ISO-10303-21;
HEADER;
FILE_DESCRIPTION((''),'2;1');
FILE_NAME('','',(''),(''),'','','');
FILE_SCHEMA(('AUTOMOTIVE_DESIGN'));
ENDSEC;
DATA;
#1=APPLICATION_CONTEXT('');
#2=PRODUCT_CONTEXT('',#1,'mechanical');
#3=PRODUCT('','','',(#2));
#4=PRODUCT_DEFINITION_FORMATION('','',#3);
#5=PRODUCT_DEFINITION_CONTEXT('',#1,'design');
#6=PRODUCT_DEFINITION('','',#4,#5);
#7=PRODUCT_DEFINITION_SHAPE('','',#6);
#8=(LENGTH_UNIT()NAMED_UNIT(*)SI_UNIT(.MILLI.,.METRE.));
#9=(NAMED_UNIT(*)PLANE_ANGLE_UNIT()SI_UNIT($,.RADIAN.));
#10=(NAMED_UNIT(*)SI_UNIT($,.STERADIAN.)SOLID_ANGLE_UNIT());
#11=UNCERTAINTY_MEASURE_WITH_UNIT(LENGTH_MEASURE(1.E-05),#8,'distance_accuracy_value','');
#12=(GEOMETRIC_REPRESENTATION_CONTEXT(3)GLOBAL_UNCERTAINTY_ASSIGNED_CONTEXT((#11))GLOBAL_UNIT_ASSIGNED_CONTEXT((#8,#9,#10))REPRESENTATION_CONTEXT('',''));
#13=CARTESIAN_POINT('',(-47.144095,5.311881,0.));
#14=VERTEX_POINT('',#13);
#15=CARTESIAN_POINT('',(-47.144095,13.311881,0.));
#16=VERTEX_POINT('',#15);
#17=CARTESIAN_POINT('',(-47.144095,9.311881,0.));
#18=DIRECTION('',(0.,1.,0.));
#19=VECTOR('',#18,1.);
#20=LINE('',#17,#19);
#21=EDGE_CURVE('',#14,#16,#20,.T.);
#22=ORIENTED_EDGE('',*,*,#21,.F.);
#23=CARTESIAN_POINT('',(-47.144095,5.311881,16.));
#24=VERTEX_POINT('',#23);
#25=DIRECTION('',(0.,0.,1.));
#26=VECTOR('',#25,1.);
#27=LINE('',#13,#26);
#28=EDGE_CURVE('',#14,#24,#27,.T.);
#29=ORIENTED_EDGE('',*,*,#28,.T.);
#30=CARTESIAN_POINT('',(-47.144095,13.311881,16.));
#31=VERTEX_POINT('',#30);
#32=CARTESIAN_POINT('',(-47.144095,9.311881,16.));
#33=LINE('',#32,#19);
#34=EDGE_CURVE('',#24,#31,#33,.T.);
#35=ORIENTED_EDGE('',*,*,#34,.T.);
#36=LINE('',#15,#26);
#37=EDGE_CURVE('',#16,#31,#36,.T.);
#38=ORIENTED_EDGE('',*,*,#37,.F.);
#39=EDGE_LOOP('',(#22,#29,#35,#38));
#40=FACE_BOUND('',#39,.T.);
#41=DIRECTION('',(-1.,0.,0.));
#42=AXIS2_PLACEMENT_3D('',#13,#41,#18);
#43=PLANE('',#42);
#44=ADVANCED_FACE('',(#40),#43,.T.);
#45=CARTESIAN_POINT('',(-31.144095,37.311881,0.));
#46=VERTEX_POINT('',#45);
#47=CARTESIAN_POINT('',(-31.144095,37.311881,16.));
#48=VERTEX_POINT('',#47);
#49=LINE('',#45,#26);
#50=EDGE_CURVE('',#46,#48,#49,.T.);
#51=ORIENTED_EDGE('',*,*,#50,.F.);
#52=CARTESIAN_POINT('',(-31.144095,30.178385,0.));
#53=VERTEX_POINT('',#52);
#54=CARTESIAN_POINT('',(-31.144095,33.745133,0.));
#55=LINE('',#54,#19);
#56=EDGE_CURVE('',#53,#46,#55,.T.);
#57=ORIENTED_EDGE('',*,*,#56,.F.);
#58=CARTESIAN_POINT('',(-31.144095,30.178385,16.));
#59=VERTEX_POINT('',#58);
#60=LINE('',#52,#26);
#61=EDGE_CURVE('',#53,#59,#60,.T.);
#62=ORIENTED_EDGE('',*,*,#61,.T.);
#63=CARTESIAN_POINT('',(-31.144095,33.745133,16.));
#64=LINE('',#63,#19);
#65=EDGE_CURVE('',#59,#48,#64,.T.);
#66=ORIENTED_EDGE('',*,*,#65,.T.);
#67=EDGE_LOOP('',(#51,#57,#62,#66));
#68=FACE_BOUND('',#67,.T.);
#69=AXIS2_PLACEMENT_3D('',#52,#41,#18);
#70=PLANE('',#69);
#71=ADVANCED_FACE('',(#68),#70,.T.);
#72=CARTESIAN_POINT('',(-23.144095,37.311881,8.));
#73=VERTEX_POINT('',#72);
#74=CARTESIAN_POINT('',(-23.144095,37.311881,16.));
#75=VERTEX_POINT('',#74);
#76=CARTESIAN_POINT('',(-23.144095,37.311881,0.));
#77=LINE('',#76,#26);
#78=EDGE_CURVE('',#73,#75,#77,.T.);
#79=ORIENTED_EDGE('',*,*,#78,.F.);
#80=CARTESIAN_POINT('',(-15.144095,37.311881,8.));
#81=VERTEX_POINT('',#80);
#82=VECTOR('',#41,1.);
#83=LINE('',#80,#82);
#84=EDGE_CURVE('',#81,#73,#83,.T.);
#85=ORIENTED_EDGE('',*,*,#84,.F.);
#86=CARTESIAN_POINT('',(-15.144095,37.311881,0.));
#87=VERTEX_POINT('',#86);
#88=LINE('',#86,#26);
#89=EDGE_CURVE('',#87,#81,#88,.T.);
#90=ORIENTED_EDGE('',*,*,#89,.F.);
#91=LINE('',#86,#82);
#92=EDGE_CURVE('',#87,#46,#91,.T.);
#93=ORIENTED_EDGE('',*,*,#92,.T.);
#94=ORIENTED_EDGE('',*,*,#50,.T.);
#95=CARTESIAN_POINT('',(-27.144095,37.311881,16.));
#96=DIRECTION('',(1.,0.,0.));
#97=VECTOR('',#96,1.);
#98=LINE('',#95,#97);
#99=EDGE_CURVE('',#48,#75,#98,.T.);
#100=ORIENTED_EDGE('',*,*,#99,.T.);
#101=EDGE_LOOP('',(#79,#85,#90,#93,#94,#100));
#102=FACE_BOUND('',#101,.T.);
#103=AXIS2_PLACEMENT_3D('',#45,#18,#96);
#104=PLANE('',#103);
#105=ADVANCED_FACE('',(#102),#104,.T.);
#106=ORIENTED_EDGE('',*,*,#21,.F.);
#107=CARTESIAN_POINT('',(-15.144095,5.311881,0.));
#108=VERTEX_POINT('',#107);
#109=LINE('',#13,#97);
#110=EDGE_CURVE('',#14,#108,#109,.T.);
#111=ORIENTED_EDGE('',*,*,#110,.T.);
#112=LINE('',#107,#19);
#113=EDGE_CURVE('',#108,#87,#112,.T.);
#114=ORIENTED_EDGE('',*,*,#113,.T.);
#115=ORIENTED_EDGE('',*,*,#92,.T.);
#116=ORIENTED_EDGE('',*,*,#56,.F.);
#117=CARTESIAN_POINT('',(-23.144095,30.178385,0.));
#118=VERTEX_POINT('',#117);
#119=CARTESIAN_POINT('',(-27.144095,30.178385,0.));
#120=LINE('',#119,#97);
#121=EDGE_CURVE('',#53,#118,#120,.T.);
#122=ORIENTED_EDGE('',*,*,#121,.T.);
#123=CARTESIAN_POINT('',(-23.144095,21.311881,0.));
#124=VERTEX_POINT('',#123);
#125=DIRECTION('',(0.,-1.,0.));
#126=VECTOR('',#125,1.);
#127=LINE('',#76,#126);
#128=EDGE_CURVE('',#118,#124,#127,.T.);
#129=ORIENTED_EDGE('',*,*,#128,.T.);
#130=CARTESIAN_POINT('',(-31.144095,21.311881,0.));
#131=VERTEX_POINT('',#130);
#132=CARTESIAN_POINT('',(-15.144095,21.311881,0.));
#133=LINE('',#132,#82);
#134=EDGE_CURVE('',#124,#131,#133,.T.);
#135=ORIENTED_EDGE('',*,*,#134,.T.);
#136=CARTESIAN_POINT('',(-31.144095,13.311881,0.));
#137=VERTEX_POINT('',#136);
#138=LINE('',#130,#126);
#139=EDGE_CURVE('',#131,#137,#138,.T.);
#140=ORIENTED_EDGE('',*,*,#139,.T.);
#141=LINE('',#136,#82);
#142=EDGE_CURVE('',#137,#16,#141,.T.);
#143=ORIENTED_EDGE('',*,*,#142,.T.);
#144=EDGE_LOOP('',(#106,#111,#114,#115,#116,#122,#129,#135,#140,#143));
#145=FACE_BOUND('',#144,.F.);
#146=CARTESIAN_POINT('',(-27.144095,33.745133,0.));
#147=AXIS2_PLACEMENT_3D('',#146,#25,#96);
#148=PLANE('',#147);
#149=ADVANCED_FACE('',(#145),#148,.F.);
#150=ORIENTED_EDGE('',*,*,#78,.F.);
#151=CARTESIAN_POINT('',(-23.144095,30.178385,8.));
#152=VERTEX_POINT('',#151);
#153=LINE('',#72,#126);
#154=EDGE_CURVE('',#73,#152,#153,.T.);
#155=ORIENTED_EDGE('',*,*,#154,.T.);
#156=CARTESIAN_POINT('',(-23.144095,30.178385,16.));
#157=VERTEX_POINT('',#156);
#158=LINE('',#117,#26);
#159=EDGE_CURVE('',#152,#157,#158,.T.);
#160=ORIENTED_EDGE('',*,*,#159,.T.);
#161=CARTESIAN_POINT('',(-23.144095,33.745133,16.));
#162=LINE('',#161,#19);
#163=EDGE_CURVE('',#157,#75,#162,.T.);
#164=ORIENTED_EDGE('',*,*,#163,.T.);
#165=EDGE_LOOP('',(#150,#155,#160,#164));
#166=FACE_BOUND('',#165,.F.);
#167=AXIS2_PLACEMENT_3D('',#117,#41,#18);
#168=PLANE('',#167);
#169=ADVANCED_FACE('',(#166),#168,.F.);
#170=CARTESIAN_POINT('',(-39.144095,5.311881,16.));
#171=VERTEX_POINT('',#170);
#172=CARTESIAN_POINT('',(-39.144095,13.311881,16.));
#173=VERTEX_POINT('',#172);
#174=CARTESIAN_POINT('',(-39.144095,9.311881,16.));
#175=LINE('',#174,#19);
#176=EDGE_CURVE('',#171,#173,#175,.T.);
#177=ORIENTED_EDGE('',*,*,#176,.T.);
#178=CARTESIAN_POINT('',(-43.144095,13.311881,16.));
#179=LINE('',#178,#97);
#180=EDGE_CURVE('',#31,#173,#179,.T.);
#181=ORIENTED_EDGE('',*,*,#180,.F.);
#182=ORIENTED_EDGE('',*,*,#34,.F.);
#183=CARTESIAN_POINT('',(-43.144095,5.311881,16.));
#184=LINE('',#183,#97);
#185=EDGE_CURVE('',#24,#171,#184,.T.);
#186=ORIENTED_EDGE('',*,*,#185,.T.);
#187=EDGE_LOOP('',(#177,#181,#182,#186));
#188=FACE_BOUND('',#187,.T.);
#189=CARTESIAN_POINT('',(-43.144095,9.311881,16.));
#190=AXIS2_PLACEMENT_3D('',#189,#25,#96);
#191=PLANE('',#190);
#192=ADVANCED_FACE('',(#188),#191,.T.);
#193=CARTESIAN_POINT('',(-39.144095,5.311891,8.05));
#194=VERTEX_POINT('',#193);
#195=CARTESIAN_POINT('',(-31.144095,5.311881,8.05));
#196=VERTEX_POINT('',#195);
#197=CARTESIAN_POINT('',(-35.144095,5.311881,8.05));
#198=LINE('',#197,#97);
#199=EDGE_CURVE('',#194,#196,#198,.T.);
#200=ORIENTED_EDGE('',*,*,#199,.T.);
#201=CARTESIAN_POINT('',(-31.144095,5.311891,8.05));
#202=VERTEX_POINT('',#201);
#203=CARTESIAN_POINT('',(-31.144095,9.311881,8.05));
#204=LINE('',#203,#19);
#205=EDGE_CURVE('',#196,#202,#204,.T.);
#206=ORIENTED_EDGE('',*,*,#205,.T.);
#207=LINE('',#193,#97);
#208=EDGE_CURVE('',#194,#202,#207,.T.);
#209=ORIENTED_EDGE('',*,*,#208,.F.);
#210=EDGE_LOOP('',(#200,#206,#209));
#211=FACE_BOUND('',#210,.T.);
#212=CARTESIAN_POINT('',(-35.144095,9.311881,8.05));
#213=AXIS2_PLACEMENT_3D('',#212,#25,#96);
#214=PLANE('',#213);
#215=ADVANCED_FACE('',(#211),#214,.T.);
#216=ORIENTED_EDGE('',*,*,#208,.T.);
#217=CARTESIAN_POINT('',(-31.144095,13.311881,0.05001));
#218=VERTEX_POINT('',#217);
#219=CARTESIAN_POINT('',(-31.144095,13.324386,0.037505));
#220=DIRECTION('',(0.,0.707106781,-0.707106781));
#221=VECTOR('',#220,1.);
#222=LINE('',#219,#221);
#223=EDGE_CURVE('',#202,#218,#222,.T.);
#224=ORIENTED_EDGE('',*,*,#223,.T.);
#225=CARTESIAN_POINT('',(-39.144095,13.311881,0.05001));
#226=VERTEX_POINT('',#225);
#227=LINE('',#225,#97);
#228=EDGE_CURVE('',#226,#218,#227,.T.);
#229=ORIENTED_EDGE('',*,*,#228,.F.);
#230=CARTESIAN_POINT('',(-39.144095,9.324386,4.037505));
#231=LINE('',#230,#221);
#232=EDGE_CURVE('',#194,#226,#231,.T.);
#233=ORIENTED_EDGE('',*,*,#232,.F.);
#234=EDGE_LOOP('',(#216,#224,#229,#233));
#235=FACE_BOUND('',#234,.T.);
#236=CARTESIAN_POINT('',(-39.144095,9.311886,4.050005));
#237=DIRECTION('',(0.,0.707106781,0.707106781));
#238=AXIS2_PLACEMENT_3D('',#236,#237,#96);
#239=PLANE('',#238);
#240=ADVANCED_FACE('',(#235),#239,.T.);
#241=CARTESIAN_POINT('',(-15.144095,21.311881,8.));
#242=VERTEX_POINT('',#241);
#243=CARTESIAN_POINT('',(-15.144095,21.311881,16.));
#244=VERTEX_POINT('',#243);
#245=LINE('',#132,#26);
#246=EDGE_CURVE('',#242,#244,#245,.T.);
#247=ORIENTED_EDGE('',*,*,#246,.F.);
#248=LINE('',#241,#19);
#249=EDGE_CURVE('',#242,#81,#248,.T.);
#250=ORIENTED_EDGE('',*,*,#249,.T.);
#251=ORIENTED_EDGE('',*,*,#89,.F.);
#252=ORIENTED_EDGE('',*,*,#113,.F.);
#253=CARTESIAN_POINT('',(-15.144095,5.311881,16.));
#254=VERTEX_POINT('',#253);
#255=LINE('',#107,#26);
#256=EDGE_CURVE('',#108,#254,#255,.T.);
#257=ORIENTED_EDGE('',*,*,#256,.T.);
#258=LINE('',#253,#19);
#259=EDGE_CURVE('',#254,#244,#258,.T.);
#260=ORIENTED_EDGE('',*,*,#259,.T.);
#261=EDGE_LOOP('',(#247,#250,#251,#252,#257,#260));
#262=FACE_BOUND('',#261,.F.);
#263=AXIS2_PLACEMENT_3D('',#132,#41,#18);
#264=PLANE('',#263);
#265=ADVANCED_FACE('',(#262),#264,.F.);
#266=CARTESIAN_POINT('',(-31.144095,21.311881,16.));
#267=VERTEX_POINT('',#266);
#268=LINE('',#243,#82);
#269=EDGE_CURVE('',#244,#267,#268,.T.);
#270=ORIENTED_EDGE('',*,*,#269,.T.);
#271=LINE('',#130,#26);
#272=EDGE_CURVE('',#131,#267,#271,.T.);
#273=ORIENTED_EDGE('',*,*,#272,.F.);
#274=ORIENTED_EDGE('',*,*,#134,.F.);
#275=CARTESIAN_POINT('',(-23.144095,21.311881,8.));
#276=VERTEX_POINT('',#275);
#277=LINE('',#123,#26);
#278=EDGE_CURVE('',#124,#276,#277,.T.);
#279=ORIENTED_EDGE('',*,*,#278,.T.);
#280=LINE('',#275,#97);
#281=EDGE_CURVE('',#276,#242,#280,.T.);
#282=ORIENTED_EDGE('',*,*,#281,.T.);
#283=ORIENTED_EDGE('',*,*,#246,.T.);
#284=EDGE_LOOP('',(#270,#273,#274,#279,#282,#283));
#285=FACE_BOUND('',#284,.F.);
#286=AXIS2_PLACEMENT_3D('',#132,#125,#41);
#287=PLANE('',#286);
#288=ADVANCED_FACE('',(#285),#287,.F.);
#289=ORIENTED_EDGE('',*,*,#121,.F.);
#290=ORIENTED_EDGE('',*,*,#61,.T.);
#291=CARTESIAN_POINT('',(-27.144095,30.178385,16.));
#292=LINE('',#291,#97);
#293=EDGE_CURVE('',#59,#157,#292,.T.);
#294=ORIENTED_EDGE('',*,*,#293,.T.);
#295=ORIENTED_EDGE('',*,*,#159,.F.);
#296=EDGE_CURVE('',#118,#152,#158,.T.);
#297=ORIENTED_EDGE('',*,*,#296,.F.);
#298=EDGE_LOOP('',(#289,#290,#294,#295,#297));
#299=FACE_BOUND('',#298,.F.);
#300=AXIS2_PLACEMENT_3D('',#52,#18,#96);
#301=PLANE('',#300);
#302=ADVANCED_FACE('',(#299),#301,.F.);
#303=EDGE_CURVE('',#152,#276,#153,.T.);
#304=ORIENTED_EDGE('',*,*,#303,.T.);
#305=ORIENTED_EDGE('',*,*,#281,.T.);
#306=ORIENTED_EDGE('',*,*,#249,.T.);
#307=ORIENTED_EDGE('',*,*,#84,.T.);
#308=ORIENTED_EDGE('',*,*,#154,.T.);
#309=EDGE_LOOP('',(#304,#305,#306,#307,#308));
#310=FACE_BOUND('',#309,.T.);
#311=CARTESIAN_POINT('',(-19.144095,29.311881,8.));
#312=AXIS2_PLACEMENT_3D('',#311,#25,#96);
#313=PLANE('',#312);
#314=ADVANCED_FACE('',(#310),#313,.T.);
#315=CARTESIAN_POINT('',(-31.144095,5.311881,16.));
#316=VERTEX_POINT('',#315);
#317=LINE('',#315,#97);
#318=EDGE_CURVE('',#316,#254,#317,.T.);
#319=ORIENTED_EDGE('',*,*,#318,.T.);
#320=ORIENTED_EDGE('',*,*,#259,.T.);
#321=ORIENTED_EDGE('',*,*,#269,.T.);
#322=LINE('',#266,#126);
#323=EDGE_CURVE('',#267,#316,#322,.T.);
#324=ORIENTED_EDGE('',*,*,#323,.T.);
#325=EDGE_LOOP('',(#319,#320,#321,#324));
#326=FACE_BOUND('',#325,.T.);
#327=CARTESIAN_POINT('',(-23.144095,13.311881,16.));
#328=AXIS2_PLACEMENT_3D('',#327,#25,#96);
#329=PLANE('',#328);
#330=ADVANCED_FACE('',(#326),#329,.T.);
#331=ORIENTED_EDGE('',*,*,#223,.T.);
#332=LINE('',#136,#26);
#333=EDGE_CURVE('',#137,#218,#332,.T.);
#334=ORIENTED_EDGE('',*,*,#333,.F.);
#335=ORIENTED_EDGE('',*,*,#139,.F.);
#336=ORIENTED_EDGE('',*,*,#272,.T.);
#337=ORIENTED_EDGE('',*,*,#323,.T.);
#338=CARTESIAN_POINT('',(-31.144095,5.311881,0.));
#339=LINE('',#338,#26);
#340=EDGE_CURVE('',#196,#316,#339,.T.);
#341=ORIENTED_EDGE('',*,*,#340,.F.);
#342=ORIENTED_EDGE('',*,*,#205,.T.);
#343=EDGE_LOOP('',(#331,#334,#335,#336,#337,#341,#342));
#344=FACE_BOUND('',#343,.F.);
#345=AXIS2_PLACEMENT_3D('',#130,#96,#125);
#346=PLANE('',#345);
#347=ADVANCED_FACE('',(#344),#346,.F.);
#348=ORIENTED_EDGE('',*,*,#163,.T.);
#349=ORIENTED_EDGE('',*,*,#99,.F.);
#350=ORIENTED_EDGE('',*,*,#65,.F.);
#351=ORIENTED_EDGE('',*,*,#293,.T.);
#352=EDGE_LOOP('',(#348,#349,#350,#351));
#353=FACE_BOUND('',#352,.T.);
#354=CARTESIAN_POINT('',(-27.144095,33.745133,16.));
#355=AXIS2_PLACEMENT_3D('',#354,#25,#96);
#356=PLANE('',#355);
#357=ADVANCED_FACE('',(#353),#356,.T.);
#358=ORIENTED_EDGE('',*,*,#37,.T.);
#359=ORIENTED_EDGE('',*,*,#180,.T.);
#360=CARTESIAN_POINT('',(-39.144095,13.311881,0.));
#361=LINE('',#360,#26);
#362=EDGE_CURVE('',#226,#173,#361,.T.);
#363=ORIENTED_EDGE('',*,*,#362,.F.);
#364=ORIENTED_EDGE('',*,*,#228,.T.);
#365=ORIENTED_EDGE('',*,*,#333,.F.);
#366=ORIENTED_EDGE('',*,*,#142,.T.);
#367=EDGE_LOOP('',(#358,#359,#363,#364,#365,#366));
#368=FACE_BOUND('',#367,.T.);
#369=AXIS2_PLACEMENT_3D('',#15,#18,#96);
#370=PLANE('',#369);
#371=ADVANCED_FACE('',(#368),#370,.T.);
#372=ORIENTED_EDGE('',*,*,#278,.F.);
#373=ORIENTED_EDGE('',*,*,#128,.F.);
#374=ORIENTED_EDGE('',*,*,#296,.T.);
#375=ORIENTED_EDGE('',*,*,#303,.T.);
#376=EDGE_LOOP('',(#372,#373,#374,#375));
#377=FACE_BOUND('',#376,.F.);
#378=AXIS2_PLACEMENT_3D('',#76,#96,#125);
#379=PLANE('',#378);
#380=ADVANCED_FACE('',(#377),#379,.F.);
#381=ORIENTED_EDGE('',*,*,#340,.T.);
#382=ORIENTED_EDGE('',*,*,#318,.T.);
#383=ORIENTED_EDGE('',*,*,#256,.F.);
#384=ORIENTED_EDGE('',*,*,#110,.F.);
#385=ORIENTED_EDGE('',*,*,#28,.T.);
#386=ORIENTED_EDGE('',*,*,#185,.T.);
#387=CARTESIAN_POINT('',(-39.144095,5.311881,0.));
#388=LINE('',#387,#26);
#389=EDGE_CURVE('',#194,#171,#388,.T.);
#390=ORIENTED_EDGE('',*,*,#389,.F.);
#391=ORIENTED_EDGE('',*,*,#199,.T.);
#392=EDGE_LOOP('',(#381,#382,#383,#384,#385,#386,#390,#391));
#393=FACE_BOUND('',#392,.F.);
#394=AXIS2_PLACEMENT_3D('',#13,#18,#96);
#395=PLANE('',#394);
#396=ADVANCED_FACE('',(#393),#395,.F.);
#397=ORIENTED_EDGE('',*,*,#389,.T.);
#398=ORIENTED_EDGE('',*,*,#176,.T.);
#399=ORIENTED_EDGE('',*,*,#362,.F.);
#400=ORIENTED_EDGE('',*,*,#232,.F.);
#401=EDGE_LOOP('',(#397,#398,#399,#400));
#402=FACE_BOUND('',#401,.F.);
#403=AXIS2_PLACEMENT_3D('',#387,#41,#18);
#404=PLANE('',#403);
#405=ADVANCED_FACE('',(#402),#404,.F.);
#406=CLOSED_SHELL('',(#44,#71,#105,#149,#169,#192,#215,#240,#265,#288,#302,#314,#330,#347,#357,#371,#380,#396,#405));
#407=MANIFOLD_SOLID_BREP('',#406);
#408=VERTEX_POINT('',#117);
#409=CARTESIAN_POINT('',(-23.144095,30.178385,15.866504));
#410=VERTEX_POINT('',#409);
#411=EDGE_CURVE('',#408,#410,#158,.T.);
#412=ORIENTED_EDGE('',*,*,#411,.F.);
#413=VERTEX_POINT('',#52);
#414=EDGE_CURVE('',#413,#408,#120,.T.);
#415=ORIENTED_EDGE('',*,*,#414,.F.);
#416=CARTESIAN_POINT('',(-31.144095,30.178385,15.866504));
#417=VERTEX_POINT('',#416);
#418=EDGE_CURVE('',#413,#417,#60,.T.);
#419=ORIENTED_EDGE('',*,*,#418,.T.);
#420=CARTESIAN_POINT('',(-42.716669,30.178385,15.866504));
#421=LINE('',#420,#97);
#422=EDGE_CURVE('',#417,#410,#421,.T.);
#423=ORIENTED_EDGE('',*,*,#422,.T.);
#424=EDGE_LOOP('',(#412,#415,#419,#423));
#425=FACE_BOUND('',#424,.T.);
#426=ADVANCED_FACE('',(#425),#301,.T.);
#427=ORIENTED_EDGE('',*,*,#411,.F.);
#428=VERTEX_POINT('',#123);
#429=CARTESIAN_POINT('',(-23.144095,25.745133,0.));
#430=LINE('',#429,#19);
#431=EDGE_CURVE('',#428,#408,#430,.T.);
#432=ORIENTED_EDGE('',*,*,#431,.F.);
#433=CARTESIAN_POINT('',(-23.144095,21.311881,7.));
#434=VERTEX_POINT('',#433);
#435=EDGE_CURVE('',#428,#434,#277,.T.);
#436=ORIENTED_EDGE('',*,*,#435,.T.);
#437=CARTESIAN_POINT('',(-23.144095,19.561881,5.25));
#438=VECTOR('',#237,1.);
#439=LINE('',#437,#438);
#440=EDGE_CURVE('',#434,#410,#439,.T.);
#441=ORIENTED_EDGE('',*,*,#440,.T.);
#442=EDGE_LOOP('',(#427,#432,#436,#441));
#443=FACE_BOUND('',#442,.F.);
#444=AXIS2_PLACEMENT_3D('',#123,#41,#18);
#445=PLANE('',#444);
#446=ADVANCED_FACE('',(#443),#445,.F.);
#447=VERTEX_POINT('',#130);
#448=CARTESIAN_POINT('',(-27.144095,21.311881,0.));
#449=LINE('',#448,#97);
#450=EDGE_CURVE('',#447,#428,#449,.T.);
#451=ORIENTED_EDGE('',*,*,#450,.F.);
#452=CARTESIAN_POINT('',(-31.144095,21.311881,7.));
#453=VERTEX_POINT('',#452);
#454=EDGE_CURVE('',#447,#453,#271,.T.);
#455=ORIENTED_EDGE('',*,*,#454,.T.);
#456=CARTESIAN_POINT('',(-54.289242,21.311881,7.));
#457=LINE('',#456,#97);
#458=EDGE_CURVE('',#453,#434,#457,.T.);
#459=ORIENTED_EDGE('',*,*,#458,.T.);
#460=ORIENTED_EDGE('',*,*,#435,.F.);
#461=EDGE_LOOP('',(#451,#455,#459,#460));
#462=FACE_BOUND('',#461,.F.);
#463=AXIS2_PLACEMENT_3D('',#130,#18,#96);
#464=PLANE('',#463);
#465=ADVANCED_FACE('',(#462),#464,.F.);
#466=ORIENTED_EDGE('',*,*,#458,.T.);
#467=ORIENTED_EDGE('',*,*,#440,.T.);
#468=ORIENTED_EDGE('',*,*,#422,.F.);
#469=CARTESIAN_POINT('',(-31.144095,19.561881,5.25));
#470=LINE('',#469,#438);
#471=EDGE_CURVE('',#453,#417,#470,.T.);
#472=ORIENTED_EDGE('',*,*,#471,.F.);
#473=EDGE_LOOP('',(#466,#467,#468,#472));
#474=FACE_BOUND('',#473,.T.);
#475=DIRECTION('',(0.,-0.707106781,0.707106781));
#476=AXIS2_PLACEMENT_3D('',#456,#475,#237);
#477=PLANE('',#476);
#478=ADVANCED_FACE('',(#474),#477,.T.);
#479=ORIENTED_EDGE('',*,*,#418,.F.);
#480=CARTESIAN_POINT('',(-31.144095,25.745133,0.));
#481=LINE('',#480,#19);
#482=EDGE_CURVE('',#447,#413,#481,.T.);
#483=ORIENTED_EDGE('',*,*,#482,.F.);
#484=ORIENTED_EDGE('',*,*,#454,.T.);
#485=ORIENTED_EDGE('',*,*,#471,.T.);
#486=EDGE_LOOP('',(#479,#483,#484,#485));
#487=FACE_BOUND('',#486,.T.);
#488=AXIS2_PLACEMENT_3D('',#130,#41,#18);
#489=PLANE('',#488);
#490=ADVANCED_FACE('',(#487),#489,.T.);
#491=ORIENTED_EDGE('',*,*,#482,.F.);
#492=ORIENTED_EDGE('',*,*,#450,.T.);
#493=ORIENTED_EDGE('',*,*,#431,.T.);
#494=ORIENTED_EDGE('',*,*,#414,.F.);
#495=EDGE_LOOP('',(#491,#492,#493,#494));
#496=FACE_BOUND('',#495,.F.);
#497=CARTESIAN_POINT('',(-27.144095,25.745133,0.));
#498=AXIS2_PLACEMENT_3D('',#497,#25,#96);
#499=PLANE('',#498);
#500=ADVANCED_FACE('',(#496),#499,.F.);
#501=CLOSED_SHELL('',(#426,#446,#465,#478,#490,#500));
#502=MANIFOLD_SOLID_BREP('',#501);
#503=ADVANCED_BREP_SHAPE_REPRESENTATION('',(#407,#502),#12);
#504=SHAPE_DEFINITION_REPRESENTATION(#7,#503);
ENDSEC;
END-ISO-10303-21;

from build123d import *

# Parameters (mm, degrees)
F0_W        = 8
F0_H        = 8
F1_DEPTH    = 8.05
F2_DEPTH    = 16
F3_SIZE     = 7.99999
F4_DEPTH    = 16
F5_DEPTH    = 8
F0_H_2      = 7.1334964926
F6_DEPTH    = 16
F0_H_3      = 8.8665035074
F7_DEPTH    = 16
F8_T1_DEPTH = 54.2902937834


# Not quite as in the source:
# - a fillet or chamfer that OpenCascade refuses, or shapes differently, is made with other operations: its cross-section is extruded or revolved along the edge and cut away or added
# - a fillet or chamfer is up to 0.001 mm smaller than in the source, because OpenCascade refuses the exact size


with BuildPart() as f1:
    # F0 (on Top) → F1 (new body)
    with BuildSketch(Plane.XY):
        with Locations((-35.1440954627, 9.3118814863)):
            Rectangle(F0_W, F0_H)
    extrude(amount=F1_DEPTH)

    # F0 (on Top) → F2 (join)
    with BuildSketch(Plane.XY):
        Polygon((-23.1440954627, 21.3118814863), (-31.1440954627, 21.3118814863), (-31.1440954627, 13.3118814863), (-31.1440954627, 5.3118814863), (-15.1440954627, 5.3118814863), (-15.1440954627, 21.3118814863), align=None)
    extrude(amount=F2_DEPTH)

    # F3 (size 8 in the source; OpenCascade refuses exactly that, so slightly less here)
    f3_edges = [f1.edges().sort_by_distance(p)[0] for p in [
        (-35.144095, 13.311881, 8.05),
    ]]
    chamfer(f3_edges, length=F3_SIZE)

    # F0 (on Top) → F4 (join)
    with BuildSketch(Plane.XY):
        with Locations((-43.1440954627, 9.3118814863)):
            Rectangle(F0_W, F0_H)
    extrude(amount=F4_DEPTH)

    # F0 (on Top) → F5 (join)
    with BuildSketch(Plane.XY):
        Polygon((-15.1440954627, 37.3118814863), (-23.1440954627, 37.3118814863), (-23.1440954627, 30.1783849937), (-23.1440954627, 21.3118814863), (-15.1440954627, 21.3118814863), align=None)
    extrude(amount=F5_DEPTH)

    # F0 (on Top) → F6 (join)
    with BuildSketch(Plane.XY):
        with Locations((-27.1440954627, 33.74513324)):
            Rectangle(F0_W, F0_H_2)
    extrude(amount=F6_DEPTH)


with BuildPart() as f7:
    # F0 (on Top) → F7 (new body)
    with BuildSketch(Plane.XY):
        with Locations((-27.1440954627, 25.74513324)):
            Rectangle(F0_W, F0_H_3)
    extrude(amount=F7_DEPTH)

    # F8: chamfer of 9 on 1 edges, made by hand

    # F8_s2 → F8_t1 (cut)
    with BuildSketch(Plane.YZ.offset(-54.2892423544)):
        Polygon((21.3118814863, 7), (30.3118814863, 16), (21.3118814863, 16), align=None)
    extrude(amount=F8_T1_DEPTH, mode=Mode.SUBTRACT)


solid = Compound([f1.part, f7.part])
